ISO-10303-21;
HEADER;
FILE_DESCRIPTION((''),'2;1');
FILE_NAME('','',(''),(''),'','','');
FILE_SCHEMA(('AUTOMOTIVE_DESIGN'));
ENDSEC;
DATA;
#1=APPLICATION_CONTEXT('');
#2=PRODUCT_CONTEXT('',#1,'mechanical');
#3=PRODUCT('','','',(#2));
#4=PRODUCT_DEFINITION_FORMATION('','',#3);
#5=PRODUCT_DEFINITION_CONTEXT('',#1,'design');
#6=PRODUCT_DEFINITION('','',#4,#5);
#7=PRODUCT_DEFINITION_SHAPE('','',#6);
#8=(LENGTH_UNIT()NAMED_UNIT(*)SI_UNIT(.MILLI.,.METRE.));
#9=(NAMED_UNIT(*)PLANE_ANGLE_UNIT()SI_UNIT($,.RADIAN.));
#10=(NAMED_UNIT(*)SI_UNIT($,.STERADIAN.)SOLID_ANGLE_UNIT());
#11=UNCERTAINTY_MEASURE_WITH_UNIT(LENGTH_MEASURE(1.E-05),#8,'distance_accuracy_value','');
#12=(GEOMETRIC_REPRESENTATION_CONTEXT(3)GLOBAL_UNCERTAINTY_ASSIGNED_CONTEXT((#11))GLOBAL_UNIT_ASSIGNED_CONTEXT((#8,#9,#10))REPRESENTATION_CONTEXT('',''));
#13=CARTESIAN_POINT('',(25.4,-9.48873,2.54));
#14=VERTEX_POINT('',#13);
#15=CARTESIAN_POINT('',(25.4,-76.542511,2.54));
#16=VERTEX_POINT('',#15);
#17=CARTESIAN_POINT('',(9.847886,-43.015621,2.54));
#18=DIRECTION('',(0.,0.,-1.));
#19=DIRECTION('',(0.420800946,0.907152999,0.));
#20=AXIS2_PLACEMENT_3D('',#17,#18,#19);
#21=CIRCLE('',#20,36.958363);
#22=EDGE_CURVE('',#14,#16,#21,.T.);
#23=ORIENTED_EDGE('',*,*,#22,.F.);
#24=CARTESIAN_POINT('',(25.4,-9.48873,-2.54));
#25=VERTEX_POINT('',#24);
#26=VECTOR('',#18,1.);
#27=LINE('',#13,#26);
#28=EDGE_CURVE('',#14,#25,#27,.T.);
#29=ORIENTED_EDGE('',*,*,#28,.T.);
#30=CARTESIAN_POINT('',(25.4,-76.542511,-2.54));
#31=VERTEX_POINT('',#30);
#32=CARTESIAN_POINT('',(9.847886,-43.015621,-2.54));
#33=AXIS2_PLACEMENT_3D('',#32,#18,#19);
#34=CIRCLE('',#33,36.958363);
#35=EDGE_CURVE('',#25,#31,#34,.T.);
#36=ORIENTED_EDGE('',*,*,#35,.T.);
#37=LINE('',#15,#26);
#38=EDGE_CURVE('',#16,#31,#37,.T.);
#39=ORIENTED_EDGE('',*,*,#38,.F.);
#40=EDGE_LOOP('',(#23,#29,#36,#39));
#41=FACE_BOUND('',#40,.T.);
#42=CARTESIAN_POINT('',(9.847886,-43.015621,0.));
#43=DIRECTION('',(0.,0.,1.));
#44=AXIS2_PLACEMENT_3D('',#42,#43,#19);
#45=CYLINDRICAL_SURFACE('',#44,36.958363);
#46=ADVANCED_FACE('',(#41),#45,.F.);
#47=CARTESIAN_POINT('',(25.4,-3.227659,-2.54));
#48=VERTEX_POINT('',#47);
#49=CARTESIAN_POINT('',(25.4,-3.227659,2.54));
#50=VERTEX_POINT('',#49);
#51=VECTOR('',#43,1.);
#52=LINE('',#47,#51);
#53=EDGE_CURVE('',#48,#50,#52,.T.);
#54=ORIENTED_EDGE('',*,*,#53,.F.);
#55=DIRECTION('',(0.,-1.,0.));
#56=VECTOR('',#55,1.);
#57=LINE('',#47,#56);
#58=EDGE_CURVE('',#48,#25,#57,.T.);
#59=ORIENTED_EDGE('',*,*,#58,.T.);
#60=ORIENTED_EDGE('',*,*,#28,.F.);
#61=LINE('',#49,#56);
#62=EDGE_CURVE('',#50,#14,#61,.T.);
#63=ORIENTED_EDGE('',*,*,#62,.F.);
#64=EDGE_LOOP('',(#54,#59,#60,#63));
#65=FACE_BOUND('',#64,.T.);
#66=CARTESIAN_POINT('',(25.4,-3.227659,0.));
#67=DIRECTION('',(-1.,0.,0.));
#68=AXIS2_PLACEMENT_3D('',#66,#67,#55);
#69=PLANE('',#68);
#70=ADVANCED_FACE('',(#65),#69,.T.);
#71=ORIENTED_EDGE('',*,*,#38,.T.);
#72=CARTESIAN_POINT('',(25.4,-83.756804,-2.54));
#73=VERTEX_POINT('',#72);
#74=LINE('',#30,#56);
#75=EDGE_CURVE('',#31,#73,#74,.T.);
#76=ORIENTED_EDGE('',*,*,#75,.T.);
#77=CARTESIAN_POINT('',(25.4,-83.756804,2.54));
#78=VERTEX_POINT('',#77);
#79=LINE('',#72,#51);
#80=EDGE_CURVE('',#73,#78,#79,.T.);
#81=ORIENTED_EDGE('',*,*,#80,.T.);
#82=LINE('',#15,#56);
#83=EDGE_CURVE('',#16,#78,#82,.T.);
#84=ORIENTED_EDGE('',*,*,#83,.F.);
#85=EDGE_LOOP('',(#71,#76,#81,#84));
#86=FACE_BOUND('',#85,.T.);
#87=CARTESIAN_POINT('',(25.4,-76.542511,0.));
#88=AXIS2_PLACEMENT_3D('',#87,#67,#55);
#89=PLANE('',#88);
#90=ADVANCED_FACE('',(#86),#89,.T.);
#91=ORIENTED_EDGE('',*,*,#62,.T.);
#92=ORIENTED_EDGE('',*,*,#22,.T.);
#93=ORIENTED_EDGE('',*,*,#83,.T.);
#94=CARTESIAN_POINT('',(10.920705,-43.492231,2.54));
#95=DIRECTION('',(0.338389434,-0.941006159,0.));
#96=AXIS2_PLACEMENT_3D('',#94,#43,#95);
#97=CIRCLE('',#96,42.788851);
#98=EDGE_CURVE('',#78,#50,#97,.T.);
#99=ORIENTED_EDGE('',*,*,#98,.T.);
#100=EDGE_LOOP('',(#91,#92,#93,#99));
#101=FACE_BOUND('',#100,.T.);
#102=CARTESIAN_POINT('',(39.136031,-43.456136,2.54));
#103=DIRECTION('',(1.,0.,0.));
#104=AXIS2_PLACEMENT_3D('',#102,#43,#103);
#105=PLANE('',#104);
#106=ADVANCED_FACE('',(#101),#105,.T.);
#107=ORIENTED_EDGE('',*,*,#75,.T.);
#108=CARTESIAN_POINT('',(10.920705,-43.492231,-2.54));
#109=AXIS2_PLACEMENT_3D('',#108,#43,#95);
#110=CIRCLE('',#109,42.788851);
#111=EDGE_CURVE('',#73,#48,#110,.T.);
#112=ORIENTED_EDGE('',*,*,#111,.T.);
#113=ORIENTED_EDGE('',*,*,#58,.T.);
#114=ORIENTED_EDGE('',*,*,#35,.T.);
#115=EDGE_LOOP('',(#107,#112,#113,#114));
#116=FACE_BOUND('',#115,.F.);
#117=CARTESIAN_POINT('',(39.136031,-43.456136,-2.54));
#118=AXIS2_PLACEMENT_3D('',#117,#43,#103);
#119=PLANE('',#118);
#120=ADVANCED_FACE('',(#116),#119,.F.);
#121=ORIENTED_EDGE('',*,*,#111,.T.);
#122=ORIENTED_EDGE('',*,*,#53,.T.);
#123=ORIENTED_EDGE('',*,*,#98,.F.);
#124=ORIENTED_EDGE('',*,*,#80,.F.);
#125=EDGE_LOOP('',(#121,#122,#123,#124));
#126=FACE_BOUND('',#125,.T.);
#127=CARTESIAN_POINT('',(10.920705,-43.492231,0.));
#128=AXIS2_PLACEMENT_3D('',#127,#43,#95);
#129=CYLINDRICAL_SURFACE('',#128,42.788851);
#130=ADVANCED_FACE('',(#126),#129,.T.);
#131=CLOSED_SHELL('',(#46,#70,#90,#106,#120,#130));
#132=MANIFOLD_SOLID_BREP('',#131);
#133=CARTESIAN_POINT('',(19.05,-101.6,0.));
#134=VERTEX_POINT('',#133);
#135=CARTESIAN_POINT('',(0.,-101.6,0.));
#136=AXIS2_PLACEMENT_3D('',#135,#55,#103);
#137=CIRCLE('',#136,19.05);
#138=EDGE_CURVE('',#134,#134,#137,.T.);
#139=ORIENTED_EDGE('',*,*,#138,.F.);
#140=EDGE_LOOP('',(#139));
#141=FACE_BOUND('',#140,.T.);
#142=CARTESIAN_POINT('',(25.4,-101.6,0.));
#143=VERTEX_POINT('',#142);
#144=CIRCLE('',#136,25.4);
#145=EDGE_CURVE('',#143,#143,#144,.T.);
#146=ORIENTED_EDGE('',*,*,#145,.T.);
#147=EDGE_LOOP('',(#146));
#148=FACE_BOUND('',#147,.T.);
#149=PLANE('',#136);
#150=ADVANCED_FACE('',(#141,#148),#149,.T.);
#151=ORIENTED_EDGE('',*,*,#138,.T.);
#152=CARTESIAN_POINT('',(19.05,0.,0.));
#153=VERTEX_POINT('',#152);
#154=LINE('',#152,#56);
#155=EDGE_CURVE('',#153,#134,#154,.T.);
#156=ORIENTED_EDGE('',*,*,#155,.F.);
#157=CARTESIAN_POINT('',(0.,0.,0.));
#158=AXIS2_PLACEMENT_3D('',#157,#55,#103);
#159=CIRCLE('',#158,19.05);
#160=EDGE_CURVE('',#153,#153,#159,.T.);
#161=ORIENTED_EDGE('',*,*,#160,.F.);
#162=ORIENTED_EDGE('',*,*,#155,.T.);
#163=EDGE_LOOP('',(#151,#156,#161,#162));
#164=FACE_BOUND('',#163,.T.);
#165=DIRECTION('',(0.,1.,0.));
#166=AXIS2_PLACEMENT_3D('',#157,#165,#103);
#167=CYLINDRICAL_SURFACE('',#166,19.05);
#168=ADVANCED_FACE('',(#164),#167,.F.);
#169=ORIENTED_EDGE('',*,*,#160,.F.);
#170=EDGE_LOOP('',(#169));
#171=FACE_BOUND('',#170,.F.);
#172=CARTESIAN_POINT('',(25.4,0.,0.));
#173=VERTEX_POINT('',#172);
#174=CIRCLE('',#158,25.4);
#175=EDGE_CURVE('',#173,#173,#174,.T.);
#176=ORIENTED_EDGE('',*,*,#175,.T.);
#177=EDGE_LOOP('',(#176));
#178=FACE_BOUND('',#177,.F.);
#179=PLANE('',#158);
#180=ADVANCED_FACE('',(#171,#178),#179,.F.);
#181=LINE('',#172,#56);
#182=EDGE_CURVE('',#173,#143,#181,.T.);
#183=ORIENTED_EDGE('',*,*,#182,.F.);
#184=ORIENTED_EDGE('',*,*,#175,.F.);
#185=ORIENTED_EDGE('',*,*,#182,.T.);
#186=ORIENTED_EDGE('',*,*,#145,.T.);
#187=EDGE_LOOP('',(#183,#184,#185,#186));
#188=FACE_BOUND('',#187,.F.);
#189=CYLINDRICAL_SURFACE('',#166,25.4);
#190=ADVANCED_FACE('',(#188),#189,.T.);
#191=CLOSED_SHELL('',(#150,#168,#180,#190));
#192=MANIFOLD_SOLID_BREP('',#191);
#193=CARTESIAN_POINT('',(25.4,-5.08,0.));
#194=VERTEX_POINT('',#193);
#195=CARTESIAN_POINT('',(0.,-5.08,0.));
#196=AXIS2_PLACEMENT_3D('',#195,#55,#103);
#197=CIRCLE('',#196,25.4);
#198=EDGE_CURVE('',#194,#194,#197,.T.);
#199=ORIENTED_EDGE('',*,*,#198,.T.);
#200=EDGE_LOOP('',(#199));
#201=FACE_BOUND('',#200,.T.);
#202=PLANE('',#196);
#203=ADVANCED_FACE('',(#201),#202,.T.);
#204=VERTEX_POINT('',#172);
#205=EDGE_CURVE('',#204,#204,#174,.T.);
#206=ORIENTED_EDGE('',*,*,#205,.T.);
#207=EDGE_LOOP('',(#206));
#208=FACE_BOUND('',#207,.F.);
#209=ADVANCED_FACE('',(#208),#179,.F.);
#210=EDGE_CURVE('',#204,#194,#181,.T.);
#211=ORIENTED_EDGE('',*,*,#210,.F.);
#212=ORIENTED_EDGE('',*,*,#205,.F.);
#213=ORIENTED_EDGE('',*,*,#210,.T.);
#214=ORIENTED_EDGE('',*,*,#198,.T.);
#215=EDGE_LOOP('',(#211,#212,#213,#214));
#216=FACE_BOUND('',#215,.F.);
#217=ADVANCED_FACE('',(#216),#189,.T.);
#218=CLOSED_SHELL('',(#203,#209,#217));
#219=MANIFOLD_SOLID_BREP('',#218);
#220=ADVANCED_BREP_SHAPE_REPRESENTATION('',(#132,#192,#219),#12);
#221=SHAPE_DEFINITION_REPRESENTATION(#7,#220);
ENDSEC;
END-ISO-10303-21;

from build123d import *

# Parameters (mm, degrees)
F0_R     = 25.4
F0_R_2   = 19.05
F1_DEPTH = 101.6
F3_DEPTH = 2.54
F4_R     = 25.4
F5_DEPTH = 5.08


with BuildPart() as f1:
    # F0 (on Front) → F1 (new body)
    with BuildSketch(Plane.XZ):
        Circle(F0_R)
        Circle(F0_R_2, mode=Mode.SUBTRACT)
    extrude(amount=F1_DEPTH)


with BuildPart() as f3:
    # F2 (on Top) → F3 (new body, symmetric)
    with BuildSketch(Plane.XY):
        with BuildLine():
            Line((25.4, -76.5425107099), (25.4, -83.7568040209))
            ThreePointArc((25.4, -83.7568040209), (53.7095561275, -43.4922314016), (25.4, -3.2276587823))
            Line((25.4, -3.2276587823), (25.4, -9.4887303788))
            ThreePointArc((25.4, -9.4887303788), (46.8062490865, -43.0156205443), (25.4, -76.5425107099))
        make_face()
    extrude(amount=F3_DEPTH, both=True)


with BuildPart() as f5:
    # F4 (on Front) → F5 (new body)
    with BuildSketch(Plane.XZ):
        Circle(F4_R)
    extrude(amount=F5_DEPTH)


solid = Compound([f1.part, f3.part, f5.part])
